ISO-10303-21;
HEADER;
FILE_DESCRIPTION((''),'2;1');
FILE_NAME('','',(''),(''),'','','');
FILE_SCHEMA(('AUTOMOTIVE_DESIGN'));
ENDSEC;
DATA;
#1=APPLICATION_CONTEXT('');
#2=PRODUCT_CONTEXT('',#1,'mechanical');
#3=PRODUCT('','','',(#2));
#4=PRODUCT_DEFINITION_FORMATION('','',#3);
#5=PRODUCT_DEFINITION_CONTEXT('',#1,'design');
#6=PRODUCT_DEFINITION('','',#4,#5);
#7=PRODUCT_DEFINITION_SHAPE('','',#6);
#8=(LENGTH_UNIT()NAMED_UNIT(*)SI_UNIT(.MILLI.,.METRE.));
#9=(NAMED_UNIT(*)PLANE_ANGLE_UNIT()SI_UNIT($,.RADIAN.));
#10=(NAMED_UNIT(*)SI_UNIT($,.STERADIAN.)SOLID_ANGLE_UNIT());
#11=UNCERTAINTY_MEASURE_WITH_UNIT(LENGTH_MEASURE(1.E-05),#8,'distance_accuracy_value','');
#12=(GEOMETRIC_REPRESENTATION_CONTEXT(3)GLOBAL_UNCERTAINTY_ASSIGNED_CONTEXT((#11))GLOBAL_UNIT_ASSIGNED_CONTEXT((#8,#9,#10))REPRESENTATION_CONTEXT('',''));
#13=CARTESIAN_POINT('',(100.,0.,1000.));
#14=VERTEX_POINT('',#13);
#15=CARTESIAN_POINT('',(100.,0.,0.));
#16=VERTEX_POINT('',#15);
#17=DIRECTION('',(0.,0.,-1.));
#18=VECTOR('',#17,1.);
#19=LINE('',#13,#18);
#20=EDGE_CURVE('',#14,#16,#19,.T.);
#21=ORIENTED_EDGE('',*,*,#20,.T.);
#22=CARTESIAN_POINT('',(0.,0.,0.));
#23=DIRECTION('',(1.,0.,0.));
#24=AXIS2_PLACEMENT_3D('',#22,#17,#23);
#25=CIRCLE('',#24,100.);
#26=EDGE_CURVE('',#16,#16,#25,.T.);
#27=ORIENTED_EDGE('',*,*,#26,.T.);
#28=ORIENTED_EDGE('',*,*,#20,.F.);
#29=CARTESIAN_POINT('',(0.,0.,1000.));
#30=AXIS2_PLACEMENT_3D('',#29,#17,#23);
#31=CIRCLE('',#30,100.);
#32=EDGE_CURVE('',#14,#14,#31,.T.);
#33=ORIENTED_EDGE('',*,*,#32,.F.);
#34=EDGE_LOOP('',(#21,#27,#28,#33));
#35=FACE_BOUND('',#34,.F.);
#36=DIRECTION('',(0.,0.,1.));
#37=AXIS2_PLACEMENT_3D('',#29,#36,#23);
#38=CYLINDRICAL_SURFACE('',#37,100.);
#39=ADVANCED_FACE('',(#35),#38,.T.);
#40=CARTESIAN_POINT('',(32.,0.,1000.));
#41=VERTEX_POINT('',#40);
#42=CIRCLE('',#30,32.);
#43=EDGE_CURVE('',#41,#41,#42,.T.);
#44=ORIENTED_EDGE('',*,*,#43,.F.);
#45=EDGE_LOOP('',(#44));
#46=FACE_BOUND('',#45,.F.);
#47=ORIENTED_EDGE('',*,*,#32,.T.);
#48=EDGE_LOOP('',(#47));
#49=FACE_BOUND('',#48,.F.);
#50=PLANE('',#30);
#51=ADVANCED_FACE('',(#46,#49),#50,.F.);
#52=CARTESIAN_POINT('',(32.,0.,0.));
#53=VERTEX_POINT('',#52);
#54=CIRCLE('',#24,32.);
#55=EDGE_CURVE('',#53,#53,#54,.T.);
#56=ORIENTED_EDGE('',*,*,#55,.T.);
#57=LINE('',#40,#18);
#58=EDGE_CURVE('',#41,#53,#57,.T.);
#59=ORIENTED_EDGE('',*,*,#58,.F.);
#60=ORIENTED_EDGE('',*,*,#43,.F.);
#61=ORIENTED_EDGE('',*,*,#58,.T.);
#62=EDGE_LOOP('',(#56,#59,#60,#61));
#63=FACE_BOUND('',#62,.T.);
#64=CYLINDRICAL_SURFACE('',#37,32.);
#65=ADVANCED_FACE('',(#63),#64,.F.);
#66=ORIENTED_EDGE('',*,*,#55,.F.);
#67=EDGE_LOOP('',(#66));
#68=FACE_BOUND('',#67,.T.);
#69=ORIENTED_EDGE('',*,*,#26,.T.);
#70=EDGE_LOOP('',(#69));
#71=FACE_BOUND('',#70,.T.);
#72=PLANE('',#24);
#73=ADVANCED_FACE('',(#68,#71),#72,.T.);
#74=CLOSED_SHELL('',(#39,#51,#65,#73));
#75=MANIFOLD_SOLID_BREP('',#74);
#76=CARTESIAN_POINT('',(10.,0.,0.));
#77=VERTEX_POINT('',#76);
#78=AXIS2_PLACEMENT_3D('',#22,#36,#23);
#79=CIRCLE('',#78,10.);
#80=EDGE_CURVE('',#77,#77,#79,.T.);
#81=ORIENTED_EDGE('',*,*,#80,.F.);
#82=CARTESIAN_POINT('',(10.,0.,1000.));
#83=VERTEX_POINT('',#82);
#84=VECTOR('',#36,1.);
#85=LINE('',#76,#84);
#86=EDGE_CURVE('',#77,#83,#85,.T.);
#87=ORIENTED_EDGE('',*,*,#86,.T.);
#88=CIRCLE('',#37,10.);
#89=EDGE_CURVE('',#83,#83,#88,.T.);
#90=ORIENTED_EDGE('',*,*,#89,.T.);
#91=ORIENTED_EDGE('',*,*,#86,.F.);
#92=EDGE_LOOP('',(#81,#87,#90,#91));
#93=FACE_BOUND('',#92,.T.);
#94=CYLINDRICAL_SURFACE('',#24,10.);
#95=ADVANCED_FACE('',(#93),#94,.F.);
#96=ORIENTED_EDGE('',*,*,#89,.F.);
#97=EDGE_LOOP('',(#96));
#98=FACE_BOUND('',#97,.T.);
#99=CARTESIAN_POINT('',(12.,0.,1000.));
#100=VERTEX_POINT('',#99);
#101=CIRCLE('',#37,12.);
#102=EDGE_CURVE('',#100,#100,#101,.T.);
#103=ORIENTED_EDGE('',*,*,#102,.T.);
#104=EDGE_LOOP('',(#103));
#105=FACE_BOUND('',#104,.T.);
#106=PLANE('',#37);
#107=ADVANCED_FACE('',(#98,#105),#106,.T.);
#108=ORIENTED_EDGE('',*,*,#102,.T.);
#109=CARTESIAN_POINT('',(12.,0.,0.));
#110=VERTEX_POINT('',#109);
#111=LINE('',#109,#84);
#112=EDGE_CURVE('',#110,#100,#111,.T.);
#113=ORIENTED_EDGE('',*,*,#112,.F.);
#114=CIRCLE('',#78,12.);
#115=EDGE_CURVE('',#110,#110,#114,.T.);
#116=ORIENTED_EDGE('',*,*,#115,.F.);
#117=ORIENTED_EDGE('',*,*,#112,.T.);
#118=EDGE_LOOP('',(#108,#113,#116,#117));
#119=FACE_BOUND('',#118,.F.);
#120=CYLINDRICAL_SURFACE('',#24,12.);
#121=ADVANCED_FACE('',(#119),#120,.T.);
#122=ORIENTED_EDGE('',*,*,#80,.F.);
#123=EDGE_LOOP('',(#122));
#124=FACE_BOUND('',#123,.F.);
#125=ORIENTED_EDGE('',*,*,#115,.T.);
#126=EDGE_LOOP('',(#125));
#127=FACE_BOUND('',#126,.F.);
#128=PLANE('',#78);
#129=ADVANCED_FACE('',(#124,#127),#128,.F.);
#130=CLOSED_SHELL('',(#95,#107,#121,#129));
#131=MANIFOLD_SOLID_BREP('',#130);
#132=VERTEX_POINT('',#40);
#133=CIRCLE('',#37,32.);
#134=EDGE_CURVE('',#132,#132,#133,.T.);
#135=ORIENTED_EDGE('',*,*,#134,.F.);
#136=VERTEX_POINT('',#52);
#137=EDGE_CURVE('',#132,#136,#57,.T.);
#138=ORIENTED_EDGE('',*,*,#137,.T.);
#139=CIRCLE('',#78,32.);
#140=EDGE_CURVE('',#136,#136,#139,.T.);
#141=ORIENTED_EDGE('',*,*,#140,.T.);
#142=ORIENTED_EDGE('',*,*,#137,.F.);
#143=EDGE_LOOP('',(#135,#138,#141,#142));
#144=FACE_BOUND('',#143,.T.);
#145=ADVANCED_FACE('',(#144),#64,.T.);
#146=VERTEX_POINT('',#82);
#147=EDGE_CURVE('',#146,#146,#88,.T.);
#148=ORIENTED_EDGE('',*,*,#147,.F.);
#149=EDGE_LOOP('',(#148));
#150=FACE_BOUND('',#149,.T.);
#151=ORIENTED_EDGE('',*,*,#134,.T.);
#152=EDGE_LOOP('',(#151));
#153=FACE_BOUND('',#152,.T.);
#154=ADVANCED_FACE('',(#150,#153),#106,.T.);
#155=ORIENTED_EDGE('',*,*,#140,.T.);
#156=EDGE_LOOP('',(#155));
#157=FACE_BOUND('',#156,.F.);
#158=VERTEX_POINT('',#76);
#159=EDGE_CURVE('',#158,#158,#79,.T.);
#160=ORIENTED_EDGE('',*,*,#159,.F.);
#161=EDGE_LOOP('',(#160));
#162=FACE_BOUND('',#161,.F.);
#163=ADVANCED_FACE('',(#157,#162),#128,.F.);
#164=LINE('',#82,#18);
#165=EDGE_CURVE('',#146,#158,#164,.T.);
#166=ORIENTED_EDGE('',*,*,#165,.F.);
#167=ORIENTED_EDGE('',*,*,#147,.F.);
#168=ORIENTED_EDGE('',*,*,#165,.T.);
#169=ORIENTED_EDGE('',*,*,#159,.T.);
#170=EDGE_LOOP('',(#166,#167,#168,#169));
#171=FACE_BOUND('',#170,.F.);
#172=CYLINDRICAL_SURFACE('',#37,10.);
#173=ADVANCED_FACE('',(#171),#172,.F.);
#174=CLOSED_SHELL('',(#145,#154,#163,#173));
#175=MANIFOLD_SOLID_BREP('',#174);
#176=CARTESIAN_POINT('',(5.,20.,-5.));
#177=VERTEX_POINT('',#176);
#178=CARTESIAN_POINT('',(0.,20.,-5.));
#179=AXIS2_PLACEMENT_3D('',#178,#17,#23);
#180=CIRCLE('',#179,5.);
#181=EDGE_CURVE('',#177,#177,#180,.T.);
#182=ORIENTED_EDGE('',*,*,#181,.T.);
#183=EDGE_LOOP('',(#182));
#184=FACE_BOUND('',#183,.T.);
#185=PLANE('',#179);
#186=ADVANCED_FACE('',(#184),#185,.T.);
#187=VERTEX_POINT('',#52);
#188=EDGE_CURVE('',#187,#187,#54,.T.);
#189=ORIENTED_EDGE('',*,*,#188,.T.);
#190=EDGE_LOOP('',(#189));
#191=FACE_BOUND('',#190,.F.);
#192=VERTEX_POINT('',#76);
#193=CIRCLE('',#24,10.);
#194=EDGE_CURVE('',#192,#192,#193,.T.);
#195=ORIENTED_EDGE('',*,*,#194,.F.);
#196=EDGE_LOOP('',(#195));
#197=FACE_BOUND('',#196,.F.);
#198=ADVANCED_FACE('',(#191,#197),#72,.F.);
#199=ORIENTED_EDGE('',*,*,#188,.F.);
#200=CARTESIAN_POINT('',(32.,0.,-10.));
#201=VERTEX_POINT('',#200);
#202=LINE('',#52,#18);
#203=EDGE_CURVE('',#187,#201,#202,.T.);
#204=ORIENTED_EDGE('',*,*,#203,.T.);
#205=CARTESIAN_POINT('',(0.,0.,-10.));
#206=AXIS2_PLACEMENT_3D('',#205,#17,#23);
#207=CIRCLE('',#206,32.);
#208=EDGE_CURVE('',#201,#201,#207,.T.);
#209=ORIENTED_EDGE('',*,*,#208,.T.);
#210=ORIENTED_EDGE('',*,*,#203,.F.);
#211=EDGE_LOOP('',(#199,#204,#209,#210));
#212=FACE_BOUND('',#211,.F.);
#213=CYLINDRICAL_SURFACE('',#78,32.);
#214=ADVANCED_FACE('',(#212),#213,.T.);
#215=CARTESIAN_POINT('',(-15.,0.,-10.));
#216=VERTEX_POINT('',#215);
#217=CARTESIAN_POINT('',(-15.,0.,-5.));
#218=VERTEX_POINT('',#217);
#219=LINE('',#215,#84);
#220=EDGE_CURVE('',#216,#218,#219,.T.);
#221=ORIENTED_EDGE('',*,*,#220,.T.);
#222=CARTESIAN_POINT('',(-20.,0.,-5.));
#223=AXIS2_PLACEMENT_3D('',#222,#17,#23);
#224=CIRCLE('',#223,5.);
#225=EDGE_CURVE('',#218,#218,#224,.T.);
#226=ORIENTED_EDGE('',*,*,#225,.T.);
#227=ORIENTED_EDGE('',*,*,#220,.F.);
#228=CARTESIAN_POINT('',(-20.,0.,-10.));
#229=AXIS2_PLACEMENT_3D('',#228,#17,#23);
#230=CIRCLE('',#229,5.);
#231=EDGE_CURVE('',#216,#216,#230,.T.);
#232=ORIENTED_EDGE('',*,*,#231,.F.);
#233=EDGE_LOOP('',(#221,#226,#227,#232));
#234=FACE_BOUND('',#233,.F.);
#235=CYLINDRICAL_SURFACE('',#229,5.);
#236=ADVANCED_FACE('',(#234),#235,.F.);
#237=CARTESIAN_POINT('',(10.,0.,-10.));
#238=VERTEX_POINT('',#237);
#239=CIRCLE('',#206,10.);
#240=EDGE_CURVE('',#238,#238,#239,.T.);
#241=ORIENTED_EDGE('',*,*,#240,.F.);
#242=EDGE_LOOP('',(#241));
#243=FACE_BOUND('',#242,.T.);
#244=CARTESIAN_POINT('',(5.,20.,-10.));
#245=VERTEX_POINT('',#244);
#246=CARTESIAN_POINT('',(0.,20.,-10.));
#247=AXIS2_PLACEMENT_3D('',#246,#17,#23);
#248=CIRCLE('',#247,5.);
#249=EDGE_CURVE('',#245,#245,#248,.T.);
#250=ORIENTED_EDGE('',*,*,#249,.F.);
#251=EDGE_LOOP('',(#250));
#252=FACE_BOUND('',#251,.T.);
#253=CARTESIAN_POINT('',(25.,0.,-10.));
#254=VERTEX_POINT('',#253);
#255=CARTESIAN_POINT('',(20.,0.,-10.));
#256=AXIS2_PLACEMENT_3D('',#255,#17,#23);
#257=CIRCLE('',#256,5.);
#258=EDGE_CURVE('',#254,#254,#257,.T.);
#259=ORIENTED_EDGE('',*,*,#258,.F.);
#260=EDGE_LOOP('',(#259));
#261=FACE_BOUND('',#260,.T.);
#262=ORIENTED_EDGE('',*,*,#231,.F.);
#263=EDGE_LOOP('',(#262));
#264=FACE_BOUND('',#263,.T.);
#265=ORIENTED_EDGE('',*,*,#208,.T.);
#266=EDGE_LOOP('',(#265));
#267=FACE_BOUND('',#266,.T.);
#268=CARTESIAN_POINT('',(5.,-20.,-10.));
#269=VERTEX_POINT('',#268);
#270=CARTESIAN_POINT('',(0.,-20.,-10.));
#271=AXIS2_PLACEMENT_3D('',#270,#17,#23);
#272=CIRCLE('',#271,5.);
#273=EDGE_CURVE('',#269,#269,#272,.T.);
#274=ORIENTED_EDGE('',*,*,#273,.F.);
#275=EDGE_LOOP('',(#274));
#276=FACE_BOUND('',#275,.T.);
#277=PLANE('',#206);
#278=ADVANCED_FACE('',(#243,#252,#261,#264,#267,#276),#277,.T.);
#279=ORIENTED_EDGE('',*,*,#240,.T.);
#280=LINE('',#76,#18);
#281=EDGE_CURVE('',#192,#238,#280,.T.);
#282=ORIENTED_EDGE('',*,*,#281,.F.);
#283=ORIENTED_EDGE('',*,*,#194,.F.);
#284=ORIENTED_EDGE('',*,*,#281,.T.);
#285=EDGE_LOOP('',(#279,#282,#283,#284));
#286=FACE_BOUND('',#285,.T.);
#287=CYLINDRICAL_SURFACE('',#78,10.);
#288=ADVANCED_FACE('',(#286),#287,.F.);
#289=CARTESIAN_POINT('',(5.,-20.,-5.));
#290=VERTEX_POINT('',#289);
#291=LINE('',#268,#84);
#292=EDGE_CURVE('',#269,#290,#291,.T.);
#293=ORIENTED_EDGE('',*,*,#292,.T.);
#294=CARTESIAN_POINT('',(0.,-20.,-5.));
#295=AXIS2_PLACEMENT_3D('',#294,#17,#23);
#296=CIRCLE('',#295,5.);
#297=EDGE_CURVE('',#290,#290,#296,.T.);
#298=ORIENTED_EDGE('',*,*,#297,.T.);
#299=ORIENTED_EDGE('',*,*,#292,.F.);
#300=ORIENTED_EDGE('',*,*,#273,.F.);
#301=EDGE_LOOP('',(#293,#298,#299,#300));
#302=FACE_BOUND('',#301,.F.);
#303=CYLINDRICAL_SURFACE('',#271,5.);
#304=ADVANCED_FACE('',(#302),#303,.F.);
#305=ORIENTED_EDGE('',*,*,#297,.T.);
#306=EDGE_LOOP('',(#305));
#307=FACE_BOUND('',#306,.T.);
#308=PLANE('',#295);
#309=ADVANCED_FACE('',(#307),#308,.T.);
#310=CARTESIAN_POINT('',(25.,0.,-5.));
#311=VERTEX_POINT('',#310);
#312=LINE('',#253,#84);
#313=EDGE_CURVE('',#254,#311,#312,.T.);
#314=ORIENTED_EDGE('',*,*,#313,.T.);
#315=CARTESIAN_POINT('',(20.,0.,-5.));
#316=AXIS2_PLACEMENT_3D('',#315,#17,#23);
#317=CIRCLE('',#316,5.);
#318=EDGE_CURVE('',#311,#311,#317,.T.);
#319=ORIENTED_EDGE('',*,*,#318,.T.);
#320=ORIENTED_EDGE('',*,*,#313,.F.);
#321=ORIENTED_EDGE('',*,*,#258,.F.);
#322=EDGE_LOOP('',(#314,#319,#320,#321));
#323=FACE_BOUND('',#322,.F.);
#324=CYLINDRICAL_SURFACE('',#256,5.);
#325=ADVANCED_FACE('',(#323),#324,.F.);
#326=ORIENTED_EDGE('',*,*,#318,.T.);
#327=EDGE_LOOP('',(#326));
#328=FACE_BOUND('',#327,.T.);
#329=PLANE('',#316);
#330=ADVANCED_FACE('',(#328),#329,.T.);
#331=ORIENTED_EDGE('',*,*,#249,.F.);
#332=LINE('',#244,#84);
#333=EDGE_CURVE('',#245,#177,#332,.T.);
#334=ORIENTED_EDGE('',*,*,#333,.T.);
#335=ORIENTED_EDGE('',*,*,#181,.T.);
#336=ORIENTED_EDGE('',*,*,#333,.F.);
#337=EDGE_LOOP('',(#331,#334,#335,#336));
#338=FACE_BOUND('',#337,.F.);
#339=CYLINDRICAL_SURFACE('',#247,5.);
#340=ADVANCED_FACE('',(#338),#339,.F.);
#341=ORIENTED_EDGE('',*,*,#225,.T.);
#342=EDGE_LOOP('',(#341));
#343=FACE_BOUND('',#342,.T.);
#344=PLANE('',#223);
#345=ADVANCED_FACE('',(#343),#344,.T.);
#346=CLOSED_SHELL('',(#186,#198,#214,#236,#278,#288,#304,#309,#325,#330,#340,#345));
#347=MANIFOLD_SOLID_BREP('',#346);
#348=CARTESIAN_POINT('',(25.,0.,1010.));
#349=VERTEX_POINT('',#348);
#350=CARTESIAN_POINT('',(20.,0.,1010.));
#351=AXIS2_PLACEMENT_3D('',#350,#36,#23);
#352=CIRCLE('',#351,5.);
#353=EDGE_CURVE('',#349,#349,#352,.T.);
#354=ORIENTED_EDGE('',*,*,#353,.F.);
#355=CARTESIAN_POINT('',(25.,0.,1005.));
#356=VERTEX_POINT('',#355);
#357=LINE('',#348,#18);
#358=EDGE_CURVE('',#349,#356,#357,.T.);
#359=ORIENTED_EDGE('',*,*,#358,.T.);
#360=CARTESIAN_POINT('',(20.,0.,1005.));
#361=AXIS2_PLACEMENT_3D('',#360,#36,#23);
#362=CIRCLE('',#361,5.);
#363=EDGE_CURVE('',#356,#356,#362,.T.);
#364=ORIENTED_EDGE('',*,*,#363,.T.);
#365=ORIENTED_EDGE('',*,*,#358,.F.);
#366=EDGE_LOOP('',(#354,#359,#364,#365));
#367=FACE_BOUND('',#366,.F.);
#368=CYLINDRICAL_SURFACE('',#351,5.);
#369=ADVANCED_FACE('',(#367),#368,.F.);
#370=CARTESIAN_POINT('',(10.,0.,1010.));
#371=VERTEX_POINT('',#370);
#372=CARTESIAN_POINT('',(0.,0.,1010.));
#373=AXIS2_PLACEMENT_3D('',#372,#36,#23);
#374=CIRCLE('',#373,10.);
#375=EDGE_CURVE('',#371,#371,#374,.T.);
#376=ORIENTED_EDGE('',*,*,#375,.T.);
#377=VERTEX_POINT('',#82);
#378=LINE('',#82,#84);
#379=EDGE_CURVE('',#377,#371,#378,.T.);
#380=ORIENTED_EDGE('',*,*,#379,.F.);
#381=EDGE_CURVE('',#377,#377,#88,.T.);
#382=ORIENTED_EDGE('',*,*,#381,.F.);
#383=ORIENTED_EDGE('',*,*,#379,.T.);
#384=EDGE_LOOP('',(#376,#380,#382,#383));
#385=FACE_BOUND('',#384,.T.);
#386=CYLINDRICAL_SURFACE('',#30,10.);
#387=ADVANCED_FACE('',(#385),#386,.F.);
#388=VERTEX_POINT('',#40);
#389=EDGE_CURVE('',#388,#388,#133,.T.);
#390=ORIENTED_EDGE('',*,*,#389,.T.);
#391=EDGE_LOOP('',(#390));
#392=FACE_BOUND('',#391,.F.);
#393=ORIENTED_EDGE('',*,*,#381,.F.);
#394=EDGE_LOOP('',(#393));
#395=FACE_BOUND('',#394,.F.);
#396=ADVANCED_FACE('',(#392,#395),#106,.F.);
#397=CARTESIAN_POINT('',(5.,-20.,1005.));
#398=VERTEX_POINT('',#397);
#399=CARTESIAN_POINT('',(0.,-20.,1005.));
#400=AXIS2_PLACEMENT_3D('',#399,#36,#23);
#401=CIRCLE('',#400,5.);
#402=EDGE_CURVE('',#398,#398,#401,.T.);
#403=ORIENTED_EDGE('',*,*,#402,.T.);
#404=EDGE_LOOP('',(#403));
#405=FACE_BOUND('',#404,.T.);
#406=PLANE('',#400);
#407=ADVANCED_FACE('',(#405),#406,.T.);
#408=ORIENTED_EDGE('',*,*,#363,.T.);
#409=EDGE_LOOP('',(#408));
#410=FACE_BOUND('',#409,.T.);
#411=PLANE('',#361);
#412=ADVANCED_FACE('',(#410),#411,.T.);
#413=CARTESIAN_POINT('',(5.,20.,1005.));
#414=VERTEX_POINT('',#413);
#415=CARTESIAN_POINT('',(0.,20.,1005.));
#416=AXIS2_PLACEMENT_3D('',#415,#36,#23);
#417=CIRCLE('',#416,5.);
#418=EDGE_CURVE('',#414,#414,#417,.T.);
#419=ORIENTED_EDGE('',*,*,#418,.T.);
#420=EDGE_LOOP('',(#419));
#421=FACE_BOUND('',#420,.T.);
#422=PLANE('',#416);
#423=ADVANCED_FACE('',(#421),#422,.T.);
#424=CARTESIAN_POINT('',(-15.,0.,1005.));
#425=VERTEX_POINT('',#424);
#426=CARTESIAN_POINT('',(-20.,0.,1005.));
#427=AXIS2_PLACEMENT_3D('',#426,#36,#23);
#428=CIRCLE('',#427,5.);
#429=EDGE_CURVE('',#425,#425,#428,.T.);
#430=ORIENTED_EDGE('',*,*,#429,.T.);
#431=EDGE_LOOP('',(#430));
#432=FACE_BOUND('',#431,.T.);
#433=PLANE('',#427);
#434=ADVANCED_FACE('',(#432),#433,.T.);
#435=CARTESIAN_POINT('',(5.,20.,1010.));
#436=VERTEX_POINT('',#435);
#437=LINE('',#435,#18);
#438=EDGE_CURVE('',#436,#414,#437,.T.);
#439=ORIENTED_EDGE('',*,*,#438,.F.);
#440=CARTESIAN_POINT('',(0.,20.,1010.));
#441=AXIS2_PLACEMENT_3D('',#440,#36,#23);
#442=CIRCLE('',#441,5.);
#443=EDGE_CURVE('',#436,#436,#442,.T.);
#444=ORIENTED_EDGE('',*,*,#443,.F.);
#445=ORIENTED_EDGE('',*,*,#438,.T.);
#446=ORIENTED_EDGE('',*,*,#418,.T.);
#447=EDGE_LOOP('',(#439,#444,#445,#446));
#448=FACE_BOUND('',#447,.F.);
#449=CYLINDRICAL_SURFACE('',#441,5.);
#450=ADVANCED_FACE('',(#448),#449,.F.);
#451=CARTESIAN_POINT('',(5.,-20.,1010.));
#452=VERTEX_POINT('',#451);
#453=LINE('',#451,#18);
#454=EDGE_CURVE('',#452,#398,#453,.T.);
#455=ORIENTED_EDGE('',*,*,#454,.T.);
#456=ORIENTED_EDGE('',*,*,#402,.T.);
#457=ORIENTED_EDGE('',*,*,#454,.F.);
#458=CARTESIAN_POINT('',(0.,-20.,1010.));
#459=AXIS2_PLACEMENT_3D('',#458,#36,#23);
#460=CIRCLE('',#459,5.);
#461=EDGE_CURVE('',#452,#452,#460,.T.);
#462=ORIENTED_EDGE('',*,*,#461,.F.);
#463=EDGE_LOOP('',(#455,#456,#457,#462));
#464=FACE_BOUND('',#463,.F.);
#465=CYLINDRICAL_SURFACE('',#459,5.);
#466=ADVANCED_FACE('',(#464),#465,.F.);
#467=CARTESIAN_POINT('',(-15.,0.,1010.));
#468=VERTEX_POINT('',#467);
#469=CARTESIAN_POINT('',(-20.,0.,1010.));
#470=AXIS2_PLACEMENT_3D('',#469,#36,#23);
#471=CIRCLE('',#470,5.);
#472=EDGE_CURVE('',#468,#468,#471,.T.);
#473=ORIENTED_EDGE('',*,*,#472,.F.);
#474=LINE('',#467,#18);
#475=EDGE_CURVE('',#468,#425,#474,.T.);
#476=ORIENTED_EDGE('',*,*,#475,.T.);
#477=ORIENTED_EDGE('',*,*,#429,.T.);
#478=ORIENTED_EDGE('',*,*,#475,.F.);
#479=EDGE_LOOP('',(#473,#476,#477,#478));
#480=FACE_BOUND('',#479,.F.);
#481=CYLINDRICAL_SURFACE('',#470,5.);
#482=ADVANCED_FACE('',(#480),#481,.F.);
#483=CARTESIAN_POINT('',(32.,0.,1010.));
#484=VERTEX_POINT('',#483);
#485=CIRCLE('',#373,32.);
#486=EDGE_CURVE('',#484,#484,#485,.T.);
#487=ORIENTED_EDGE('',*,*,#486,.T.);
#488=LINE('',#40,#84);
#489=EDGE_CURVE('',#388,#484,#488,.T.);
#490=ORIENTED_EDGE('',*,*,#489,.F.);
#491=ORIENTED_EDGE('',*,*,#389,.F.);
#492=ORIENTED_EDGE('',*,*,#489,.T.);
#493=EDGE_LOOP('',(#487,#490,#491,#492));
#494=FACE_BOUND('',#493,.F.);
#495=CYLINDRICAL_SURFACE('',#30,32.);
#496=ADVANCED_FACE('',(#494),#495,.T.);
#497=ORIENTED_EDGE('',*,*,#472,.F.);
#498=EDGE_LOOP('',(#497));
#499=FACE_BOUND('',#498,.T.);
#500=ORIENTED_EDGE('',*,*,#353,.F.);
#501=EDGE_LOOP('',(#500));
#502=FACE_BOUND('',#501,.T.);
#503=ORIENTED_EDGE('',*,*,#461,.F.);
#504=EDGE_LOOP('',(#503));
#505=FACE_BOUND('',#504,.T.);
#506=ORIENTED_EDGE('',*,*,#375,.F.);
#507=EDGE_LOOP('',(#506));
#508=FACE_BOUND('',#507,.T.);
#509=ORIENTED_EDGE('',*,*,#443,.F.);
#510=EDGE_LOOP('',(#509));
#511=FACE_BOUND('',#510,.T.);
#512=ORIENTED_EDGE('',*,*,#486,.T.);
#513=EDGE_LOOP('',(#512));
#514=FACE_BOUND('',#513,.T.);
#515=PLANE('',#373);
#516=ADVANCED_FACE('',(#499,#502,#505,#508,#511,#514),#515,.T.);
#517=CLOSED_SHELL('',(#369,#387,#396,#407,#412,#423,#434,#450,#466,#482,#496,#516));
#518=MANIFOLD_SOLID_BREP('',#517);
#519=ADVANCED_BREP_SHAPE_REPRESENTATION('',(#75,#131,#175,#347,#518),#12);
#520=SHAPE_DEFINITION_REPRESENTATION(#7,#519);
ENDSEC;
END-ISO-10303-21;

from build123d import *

# Parameters (mm, degrees)
F0_R      = 12
F0_R_2    = 10
F1_DEPTH  = 1000
F2_R      = 32
F2_R_2    = 12
F2_R_3    = 10
F3_DEPTH  = 10
F4_R      = 32
F4_R_2    = 12
F4_R_3    = 10
F5_DEPTH  = 10
F6_DEPTH  = 1000
F7_R      = 5
F8_DEPTH  = 5
F9_R      = 5
F10_DEPTH = 5
F11_R     = 100
F11_R_2   = 32
F12_DEPTH = 1000


with BuildPart() as f1:
    # F0 (on Top) → F1 (new body)
    with BuildSketch(Plane.XY):
        Circle(F0_R)
        Circle(F0_R_2, mode=Mode.SUBTRACT)
    extrude(amount=F1_DEPTH)


with BuildPart() as f3:
    # F2 (on face) → F3 (new body)
    with BuildSketch(Plane.XY.offset(1000)):
        Circle(F2_R)
        Circle(F2_R_2, mode=Mode.SUBTRACT)
        Circle(F2_R_2)
        Circle(F2_R_3, mode=Mode.SUBTRACT)
    extrude(amount=F3_DEPTH)


with BuildPart() as f5:
    # F4 (on face) → F5 (new body)
    with BuildSketch(Plane(origin=(0, 0, 0), x_dir=(1, 0, 0), z_dir=(0, 0, -1))):
        Circle(F4_R)
        Circle(F4_R_2, mode=Mode.SUBTRACT)
        Circle(F4_R_2)
        Circle(F4_R_3, mode=Mode.SUBTRACT)
    extrude(amount=F5_DEPTH)

    # F7 (on face) → F8 (cut)
    with BuildSketch(Plane(origin=(0, 0, -10), x_dir=(1, 0, 0), z_dir=(0, 0, -1))):
        with Locations((0, 20)):
            Circle(F7_R)
        with Locations((-20, 0)):
            Circle(F7_R)
        with Locations((0, -20)):
            Circle(F7_R)
        with Locations((20, 0)):
            Circle(F7_R)
    extrude(amount=-F8_DEPTH, mode=Mode.SUBTRACT)


with BuildPart() as f6:
    # F6 (new, through all): a face of the model
    f6_faces = [f3.part.faces().sort_by_distance(p)[0] for p in [
        (-31.0949033201, 0, 1000),
    ]]
    extrude(f6_faces, amount=F6_DEPTH)


with BuildPart() as f3_1:
    add(f3.part)

    # F9 (on face) → F10 (cut)
    with BuildSketch(Plane.XY.offset(1010)):
        with Locations((0, 20)):
            Circle(F9_R)
        with Locations((-20, 0)):
            Circle(F9_R)
        with Locations((0, -20)):
            Circle(F9_R)
        with Locations((20, 0)):
            Circle(F9_R)
    extrude(amount=-F10_DEPTH, mode=Mode.SUBTRACT)


with BuildPart() as f12:
    # F11 (on face) → F12 (new body, through all)
    with BuildSketch(Plane(origin=(0, 0, 1000), x_dir=(1, 0, 0), z_dir=(0, 0, -1))):
        Circle(F11_R)
        Circle(F11_R_2, mode=Mode.SUBTRACT)
    extrude(amount=F12_DEPTH)


solid = Compound([f1.part, f5.part, f6.part, f3_1.part, f12.part])
